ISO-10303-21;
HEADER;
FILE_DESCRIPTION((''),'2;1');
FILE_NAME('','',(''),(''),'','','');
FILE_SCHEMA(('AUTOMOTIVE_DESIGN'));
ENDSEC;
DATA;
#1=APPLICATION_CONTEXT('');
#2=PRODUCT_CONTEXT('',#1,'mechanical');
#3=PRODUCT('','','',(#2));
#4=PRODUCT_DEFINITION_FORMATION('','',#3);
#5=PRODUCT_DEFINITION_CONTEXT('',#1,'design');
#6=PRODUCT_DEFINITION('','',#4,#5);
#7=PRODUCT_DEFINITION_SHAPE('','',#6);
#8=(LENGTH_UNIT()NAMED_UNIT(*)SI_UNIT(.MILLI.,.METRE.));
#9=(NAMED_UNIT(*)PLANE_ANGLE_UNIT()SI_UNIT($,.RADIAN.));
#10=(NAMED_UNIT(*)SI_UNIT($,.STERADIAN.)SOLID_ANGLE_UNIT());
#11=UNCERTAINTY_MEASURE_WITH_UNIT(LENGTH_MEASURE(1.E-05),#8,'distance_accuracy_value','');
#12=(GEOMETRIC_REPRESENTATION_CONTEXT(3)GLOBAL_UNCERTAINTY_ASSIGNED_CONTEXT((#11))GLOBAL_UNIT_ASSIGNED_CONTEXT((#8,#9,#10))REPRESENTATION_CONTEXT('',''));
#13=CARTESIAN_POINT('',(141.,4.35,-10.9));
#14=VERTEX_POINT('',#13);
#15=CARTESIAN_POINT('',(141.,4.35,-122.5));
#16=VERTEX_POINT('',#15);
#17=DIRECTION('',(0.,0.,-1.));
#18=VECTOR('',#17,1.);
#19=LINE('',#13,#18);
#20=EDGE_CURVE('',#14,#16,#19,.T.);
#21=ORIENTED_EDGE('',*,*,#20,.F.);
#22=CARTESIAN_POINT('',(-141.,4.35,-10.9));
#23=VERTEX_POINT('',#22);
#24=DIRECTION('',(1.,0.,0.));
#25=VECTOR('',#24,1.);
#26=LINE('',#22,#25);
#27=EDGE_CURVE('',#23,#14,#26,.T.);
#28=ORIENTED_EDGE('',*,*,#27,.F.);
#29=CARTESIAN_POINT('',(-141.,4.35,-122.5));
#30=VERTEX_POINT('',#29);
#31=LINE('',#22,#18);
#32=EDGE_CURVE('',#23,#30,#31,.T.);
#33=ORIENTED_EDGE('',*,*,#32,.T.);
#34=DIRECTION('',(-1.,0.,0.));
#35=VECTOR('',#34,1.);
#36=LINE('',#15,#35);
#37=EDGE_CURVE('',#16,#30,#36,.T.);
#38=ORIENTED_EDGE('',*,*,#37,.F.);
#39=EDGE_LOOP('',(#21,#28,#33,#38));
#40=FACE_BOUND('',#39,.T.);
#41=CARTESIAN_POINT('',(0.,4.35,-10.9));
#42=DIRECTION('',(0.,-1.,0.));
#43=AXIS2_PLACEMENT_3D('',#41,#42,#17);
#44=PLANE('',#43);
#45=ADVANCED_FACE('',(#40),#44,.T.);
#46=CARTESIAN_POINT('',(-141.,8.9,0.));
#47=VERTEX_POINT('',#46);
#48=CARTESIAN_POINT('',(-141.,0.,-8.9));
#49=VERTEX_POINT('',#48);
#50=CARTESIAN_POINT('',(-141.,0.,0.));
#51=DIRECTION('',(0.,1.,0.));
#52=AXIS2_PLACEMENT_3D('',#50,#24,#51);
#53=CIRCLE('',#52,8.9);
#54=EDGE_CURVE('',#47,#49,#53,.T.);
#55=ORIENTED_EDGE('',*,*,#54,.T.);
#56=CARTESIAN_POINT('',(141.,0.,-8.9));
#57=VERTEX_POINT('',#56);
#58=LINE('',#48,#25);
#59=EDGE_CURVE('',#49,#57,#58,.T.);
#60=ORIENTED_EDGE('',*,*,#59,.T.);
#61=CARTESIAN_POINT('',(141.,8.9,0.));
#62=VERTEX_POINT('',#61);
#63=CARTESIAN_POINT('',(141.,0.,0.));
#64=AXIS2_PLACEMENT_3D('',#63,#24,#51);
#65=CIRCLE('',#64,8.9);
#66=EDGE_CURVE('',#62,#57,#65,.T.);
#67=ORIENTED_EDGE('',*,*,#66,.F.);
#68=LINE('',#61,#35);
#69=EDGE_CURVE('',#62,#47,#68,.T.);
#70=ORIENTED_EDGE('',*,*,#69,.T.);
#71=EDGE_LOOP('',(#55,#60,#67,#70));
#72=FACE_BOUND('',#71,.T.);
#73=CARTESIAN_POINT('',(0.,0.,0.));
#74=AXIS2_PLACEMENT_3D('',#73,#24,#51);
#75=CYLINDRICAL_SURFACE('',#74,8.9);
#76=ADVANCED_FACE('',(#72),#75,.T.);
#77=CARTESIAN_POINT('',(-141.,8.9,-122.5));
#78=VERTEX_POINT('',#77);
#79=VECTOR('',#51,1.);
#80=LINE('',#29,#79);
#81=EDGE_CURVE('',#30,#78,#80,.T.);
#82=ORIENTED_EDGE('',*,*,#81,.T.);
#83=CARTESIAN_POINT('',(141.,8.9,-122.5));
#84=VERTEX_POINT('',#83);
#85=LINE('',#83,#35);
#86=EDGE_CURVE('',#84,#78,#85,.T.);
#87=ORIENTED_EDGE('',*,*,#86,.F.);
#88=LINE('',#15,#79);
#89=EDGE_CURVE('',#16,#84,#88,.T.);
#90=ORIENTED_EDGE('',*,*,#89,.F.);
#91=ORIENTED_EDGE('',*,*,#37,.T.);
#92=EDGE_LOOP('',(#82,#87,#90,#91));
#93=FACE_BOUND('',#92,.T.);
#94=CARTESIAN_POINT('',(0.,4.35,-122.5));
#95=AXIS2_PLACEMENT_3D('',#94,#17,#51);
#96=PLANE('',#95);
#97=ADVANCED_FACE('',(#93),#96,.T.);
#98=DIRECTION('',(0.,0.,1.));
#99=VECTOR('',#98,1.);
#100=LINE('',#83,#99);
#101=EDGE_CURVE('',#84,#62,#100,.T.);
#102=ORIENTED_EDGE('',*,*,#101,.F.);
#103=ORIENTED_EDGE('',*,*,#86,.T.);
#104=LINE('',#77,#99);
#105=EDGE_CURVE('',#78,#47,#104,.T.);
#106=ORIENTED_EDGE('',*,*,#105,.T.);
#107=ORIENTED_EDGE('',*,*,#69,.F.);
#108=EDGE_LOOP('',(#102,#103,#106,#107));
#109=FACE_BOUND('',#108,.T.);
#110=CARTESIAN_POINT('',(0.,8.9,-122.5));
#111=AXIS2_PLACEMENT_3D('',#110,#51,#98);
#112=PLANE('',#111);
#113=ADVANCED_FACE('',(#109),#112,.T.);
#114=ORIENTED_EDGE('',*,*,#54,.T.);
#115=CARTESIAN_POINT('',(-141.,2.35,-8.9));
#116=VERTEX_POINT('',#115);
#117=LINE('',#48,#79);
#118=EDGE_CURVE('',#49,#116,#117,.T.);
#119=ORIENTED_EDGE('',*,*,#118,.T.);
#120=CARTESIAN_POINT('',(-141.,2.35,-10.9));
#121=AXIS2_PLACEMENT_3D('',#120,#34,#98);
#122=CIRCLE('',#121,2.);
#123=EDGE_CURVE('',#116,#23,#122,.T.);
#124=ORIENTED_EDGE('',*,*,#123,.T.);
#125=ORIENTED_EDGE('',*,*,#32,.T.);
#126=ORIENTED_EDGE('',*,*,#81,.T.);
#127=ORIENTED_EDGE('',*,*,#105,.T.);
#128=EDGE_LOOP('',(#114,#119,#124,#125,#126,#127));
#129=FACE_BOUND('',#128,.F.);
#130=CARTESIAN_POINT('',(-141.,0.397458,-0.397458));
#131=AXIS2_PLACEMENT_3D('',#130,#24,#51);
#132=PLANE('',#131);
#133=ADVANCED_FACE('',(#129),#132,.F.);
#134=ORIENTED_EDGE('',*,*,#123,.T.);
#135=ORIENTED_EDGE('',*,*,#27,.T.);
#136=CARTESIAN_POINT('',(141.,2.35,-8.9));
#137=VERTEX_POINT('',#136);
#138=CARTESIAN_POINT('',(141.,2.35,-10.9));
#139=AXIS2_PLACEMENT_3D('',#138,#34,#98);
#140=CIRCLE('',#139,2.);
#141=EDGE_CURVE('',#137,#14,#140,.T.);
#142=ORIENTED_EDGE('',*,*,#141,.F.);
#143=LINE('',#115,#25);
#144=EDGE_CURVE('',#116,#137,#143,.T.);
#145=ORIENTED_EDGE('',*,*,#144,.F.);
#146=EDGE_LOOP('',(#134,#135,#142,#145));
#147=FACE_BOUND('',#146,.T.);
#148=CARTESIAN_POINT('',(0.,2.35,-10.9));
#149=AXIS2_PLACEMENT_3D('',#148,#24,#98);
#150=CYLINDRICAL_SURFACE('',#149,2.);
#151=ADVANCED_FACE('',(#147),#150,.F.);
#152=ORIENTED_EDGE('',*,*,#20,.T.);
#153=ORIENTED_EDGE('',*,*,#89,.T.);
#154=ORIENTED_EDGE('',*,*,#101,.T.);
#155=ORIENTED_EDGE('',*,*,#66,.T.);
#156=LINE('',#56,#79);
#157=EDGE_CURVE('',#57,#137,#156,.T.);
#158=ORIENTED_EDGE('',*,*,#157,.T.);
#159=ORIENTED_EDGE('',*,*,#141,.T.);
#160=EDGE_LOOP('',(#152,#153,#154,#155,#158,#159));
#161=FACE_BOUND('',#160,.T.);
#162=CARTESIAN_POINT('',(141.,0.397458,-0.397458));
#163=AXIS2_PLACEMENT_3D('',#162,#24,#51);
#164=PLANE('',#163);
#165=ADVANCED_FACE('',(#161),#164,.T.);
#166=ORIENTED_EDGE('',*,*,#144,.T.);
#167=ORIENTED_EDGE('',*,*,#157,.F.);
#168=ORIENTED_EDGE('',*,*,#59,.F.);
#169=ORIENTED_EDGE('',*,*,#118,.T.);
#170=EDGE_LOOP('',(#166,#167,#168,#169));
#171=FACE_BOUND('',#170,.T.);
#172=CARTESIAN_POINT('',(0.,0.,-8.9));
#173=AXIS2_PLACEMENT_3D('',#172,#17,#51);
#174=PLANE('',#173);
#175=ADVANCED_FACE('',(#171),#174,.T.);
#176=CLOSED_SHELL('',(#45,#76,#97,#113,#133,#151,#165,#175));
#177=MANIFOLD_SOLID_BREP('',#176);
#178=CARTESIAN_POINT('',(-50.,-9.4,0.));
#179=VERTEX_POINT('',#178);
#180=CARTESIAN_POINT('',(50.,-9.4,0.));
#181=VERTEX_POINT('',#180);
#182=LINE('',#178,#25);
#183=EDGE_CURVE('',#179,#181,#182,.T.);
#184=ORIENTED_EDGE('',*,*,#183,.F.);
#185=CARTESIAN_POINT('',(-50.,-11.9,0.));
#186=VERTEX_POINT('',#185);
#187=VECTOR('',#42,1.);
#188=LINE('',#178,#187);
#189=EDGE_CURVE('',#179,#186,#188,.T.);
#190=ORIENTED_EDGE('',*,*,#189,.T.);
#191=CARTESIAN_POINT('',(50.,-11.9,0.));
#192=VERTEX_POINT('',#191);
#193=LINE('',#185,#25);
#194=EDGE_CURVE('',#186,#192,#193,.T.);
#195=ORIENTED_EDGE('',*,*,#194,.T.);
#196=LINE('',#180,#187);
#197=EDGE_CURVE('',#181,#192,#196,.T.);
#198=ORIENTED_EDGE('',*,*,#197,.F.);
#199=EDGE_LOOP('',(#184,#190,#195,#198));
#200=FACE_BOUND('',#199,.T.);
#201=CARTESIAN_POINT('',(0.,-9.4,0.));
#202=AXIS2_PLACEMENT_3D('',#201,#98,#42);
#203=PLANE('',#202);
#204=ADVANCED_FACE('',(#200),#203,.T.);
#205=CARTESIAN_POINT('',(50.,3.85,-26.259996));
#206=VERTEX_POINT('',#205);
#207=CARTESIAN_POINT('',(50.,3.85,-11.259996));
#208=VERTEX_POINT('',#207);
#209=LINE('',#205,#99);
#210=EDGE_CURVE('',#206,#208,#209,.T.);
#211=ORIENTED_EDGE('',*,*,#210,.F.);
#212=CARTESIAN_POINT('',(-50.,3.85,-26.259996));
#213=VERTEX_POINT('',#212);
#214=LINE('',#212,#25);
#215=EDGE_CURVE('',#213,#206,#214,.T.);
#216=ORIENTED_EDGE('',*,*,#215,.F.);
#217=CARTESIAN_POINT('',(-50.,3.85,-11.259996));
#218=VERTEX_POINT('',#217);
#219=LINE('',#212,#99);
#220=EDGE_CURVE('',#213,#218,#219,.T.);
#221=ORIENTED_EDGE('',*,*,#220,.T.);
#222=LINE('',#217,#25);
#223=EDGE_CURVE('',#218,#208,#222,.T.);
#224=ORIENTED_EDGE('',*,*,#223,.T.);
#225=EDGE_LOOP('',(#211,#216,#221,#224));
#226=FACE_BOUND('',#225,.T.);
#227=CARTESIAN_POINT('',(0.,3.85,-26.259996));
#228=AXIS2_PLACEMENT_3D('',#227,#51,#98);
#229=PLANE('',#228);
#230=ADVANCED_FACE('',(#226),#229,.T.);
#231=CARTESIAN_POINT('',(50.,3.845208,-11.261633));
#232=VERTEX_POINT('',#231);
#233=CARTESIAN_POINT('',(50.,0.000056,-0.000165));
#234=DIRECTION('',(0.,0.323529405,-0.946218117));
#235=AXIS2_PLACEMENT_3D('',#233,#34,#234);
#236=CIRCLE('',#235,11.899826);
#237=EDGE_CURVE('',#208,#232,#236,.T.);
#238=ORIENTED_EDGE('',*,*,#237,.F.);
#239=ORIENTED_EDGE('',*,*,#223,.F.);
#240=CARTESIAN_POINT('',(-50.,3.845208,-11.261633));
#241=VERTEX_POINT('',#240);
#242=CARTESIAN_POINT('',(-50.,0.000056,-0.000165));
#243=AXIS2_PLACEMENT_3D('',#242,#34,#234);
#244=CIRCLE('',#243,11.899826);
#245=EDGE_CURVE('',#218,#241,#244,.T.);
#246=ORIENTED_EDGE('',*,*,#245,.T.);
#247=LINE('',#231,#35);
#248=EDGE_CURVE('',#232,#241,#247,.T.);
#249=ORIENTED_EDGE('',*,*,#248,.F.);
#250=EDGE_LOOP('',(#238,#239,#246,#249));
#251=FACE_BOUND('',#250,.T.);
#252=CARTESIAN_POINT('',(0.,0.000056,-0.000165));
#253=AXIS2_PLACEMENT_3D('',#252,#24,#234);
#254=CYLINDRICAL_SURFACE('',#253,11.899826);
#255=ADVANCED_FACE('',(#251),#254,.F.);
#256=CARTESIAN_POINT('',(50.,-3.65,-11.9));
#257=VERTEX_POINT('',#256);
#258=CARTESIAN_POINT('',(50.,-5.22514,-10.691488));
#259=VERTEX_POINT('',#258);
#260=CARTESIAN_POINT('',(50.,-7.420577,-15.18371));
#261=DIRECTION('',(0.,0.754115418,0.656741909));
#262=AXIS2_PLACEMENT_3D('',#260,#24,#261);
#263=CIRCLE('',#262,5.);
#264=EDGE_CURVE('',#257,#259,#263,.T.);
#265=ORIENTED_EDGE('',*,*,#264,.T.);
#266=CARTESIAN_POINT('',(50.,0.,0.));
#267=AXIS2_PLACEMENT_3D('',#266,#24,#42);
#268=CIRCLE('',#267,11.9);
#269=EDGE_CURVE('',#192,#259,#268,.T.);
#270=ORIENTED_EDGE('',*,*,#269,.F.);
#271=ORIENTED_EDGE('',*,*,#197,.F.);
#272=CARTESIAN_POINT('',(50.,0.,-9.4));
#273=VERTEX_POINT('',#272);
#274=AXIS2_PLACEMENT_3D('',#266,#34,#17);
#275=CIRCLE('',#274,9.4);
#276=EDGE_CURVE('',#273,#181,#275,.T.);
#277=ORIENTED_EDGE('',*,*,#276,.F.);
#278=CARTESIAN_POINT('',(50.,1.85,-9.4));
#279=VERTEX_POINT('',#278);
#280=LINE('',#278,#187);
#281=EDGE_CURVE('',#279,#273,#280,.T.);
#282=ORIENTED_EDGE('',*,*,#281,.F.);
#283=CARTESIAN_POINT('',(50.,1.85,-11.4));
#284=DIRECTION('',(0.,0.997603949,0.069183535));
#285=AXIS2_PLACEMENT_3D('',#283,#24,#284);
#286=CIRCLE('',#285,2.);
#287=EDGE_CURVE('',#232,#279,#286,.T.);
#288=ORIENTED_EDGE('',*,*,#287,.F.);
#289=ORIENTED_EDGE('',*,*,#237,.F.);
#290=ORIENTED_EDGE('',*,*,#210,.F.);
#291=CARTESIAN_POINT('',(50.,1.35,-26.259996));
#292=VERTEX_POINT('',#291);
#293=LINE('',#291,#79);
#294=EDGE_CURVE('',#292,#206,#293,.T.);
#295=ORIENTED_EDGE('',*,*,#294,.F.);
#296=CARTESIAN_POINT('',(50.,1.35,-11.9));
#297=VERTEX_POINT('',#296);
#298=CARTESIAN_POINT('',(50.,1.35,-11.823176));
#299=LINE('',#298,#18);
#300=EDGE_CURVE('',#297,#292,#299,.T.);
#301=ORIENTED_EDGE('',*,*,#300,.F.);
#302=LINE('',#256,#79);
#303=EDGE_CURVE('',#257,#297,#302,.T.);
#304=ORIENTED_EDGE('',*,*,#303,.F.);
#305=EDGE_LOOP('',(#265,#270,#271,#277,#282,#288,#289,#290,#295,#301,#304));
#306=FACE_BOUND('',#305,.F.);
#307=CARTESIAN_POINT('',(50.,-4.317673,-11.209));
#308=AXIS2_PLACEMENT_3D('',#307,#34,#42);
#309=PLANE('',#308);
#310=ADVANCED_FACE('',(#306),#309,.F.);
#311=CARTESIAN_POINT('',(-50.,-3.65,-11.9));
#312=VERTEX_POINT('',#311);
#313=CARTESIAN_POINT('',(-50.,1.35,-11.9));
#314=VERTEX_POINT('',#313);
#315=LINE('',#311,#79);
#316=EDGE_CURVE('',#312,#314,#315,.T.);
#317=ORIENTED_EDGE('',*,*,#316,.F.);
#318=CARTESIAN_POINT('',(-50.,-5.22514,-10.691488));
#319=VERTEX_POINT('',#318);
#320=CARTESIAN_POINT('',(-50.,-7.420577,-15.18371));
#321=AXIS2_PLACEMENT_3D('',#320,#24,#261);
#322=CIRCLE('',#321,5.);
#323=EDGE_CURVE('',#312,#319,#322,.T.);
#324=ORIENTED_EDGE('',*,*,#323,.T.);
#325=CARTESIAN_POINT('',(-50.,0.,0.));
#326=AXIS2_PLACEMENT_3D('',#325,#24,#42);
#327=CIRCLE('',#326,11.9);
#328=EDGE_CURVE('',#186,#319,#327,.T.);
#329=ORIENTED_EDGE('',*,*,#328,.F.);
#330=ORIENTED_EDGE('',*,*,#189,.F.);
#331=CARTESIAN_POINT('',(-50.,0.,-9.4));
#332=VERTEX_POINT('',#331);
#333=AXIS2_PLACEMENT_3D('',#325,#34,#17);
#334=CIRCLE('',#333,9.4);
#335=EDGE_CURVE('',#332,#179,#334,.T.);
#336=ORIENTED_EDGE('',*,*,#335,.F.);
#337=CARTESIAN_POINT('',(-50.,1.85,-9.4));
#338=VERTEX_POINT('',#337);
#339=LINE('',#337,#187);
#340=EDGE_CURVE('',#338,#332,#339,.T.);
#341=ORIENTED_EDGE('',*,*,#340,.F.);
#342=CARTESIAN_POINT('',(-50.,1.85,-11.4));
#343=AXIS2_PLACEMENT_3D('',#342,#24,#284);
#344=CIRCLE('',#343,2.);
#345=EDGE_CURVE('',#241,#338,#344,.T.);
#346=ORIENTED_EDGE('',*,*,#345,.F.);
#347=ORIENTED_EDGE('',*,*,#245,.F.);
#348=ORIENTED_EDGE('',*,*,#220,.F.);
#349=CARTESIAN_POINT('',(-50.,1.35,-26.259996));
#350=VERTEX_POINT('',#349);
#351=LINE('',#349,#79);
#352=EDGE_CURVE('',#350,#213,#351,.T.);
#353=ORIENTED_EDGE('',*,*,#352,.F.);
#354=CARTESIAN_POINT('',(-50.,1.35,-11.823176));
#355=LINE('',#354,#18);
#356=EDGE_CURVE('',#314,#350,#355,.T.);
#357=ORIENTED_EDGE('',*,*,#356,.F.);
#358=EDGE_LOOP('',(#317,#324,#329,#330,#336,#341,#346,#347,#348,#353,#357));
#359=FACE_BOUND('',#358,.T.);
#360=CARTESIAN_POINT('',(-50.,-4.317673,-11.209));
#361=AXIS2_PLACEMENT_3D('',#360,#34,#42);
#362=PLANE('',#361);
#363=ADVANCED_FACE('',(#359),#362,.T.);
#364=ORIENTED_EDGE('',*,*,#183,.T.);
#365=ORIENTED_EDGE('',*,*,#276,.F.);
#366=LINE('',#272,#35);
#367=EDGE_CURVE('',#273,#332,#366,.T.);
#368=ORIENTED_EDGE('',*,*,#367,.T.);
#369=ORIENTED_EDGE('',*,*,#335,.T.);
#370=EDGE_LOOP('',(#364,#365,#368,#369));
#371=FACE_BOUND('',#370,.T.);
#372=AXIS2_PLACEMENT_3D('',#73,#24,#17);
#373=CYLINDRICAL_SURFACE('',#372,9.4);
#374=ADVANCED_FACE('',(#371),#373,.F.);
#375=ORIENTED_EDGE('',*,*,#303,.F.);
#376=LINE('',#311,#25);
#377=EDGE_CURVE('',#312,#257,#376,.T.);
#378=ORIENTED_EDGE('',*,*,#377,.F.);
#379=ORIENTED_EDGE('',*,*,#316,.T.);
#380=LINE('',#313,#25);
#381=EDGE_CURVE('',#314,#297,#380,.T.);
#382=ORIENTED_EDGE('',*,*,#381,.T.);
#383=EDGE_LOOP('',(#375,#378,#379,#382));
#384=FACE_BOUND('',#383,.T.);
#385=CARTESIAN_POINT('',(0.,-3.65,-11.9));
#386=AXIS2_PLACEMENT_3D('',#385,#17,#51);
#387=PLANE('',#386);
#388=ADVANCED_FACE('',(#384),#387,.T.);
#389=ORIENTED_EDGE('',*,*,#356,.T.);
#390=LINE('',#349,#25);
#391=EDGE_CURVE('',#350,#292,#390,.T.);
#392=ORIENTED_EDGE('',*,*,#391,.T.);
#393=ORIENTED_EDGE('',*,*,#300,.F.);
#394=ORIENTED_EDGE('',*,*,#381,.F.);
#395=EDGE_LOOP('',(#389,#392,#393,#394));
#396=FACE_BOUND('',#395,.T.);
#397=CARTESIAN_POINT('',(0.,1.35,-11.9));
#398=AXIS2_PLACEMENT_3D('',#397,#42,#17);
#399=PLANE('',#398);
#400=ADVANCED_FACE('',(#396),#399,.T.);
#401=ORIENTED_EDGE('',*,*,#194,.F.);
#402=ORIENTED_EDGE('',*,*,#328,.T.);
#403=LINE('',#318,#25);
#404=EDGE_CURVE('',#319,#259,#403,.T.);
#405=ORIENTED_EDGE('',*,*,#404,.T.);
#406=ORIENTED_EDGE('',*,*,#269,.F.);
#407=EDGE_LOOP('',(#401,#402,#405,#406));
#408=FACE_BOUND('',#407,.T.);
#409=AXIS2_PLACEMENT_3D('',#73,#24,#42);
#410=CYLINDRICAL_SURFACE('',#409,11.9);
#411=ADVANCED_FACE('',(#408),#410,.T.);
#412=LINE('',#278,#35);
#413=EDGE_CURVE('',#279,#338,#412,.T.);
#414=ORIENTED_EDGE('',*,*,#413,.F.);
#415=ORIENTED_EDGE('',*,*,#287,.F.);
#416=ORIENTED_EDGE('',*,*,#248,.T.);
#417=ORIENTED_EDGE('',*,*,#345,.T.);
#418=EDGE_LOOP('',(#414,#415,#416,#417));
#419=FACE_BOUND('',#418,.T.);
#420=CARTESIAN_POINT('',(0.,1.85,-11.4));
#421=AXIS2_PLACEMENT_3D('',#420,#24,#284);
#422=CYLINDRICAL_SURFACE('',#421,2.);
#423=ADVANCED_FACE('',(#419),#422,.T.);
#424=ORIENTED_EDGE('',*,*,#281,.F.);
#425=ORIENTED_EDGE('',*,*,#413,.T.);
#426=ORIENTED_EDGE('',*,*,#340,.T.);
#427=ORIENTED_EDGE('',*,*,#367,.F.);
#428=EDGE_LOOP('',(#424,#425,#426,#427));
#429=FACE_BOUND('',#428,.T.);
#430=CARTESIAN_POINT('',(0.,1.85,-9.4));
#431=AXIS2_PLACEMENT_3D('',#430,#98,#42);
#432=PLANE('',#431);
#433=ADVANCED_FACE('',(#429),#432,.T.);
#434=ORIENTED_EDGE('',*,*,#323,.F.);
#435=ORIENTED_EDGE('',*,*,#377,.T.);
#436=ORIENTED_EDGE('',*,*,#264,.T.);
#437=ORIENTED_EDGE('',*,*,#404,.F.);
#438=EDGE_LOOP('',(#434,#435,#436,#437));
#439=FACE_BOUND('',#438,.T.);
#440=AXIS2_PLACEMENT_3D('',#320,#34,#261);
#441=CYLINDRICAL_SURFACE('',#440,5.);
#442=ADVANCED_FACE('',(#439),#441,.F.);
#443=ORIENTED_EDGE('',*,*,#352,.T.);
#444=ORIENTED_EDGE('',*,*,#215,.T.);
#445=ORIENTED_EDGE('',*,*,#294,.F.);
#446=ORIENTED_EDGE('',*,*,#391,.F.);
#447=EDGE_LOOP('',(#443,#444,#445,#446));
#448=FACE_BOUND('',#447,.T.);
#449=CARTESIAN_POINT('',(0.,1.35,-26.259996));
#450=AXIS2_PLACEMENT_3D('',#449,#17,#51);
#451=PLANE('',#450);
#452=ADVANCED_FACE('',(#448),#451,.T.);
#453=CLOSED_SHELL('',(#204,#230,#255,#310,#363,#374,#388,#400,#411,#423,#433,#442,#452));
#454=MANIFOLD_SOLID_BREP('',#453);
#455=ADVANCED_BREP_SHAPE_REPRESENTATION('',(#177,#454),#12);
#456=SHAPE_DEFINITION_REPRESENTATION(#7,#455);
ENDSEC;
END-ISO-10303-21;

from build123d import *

# Parameters (mm, degrees)
F1_DEPTH    = 141
F3_DEPTH    = 50
F4_T1_DEPTH = 100


# Not quite as in the source:
# - a fillet or chamfer that OpenCascade refuses, or shapes differently, is made with other operations: its cross-section is extruded or revolved along the edge and cut away or added


with BuildPart() as f1:
    # F0 (on Right) → F1 (new body, symmetric)
    with BuildSketch(Plane.YZ):
        with BuildLine():
            ThreePointArc((0, -8.9), (6.2932503526, -6.2932503526), (8.9, 0))
            ThreePointArc((8.9, 0), (-6.2932503526, 6.2932503526), (0, -8.9))
        make_face()
        with BuildLine():
            Line((8.9, -122.5), (8.9, 0))
            ThreePointArc((8.9, 0), (6.2932503526, -6.2932503526), (0, -8.9))
            Line((0, -8.9), (2.35, -8.9))
            ThreePointArc((2.35, -8.9), (3.7642135624, -9.4857864376), (4.35, -10.9))
            Line((4.35, -10.9), (4.35, -122.5))
            Line((4.35, -122.5), (8.9, -122.5))
        make_face()
    extrude(amount=F1_DEPTH, both=True)


with BuildPart() as f3:
    # F2 (on Right) → F3 (new body, symmetric)
    with BuildSketch(Plane.YZ):
        with BuildLine():
            ThreePointArc((0, -9.4), (-6.6468037432, -6.6468037432), (-9.4, 0))
            Line((-9.4, 0), (-11.9, 0))
            ThreePointArc((-11.9, 0), (-9.618861679, -7.0062472123), (-3.65, -11.3264071973))
            ThreePointArc((-3.65, -11.3264071973), (-1.8473974259, -11.7557272319), (-4.02e-08, -11.9))
            ThreePointArc((-4.02e-08, -11.9), (0.6760920348, -11.8807785755), (1.35, -11.8231763922))
            ThreePointArc((1.35, -11.8231763922), (2.6127340162, -11.6096348332), (3.8452078973, -11.2616329289))
            ThreePointArc((3.8452078973, -11.2616329289), (3.2144166992, -9.9376843463), (1.85, -9.4))
            Line((1.85, -9.4), (0, -9.4))
        make_face()
        with BuildLine():
            ThreePointArc((-4.02e-08, -11.9), (-1.8473974259, -11.7557272319), (-3.65, -11.3264071973))
            Line((-3.65, -11.3264071973), (-3.65, -11.9))
            Line((-3.65, -11.9), (-4.02e-08, -11.9))
        make_face()
        with BuildLine():
            ThreePointArc((3.85, -11.4), (3.8488016153, -11.3307749854), (3.8452078973, -11.2616329289))
            ThreePointArc((3.8452078973, -11.2616329289), (2.6127340162, -11.6096348332), (1.35, -11.8231763922))
            Line((1.35, -11.8231763922), (1.35, -11.9))
            Line((1.35, -11.9), (1.35, -26.2599955595))
            Line((1.35, -26.2599955595), (3.85, -26.2599955595))
            Line((3.85, -26.2599955595), (3.85, -11.4))
        make_face()
        with BuildLine():
            ThreePointArc((3.85, -11.2599955595), (3.8476040358, -11.2608144991), (3.8452078973, -11.2616329289))
            ThreePointArc((3.8452078973, -11.2616329289), (3.8488016153, -11.3307749854), (3.85, -11.4))
            Line((3.85, -11.4), (3.85, -11.2599955595))
        make_face()
        with BuildLine():
            ThreePointArc((1.35, -11.8231763922), (0.6760920348, -11.8807785755), (-4.02e-08, -11.9))
            Line((-4.02e-08, -11.9), (1.35, -11.9))
            Line((1.35, -11.9), (1.35, -11.8231763922))
        make_face()
    extrude(amount=F3_DEPTH, both=True)

    # F4: fillet of radius 5 on 1 edges, made by hand

    # F4_s2 → F4_t1 (join)
    with BuildSketch(Plane.YZ.offset(-50)):
        with BuildLine():
            ThreePointArc((-3.65, -11.9), (-4.3769843949, -11.2167783036), (-5.2251400827, -10.6914877878))
            ThreePointArc((-5.2251400827, -10.6914877878), (-4.4489109382, -11.0370825612), (-3.65, -11.3264071973))
            Line((-3.65, -11.3264071973), (-3.65, -11.9))
        make_face()
    extrude(amount=F4_T1_DEPTH)


solid = Compound([f1.part, f3.part])
